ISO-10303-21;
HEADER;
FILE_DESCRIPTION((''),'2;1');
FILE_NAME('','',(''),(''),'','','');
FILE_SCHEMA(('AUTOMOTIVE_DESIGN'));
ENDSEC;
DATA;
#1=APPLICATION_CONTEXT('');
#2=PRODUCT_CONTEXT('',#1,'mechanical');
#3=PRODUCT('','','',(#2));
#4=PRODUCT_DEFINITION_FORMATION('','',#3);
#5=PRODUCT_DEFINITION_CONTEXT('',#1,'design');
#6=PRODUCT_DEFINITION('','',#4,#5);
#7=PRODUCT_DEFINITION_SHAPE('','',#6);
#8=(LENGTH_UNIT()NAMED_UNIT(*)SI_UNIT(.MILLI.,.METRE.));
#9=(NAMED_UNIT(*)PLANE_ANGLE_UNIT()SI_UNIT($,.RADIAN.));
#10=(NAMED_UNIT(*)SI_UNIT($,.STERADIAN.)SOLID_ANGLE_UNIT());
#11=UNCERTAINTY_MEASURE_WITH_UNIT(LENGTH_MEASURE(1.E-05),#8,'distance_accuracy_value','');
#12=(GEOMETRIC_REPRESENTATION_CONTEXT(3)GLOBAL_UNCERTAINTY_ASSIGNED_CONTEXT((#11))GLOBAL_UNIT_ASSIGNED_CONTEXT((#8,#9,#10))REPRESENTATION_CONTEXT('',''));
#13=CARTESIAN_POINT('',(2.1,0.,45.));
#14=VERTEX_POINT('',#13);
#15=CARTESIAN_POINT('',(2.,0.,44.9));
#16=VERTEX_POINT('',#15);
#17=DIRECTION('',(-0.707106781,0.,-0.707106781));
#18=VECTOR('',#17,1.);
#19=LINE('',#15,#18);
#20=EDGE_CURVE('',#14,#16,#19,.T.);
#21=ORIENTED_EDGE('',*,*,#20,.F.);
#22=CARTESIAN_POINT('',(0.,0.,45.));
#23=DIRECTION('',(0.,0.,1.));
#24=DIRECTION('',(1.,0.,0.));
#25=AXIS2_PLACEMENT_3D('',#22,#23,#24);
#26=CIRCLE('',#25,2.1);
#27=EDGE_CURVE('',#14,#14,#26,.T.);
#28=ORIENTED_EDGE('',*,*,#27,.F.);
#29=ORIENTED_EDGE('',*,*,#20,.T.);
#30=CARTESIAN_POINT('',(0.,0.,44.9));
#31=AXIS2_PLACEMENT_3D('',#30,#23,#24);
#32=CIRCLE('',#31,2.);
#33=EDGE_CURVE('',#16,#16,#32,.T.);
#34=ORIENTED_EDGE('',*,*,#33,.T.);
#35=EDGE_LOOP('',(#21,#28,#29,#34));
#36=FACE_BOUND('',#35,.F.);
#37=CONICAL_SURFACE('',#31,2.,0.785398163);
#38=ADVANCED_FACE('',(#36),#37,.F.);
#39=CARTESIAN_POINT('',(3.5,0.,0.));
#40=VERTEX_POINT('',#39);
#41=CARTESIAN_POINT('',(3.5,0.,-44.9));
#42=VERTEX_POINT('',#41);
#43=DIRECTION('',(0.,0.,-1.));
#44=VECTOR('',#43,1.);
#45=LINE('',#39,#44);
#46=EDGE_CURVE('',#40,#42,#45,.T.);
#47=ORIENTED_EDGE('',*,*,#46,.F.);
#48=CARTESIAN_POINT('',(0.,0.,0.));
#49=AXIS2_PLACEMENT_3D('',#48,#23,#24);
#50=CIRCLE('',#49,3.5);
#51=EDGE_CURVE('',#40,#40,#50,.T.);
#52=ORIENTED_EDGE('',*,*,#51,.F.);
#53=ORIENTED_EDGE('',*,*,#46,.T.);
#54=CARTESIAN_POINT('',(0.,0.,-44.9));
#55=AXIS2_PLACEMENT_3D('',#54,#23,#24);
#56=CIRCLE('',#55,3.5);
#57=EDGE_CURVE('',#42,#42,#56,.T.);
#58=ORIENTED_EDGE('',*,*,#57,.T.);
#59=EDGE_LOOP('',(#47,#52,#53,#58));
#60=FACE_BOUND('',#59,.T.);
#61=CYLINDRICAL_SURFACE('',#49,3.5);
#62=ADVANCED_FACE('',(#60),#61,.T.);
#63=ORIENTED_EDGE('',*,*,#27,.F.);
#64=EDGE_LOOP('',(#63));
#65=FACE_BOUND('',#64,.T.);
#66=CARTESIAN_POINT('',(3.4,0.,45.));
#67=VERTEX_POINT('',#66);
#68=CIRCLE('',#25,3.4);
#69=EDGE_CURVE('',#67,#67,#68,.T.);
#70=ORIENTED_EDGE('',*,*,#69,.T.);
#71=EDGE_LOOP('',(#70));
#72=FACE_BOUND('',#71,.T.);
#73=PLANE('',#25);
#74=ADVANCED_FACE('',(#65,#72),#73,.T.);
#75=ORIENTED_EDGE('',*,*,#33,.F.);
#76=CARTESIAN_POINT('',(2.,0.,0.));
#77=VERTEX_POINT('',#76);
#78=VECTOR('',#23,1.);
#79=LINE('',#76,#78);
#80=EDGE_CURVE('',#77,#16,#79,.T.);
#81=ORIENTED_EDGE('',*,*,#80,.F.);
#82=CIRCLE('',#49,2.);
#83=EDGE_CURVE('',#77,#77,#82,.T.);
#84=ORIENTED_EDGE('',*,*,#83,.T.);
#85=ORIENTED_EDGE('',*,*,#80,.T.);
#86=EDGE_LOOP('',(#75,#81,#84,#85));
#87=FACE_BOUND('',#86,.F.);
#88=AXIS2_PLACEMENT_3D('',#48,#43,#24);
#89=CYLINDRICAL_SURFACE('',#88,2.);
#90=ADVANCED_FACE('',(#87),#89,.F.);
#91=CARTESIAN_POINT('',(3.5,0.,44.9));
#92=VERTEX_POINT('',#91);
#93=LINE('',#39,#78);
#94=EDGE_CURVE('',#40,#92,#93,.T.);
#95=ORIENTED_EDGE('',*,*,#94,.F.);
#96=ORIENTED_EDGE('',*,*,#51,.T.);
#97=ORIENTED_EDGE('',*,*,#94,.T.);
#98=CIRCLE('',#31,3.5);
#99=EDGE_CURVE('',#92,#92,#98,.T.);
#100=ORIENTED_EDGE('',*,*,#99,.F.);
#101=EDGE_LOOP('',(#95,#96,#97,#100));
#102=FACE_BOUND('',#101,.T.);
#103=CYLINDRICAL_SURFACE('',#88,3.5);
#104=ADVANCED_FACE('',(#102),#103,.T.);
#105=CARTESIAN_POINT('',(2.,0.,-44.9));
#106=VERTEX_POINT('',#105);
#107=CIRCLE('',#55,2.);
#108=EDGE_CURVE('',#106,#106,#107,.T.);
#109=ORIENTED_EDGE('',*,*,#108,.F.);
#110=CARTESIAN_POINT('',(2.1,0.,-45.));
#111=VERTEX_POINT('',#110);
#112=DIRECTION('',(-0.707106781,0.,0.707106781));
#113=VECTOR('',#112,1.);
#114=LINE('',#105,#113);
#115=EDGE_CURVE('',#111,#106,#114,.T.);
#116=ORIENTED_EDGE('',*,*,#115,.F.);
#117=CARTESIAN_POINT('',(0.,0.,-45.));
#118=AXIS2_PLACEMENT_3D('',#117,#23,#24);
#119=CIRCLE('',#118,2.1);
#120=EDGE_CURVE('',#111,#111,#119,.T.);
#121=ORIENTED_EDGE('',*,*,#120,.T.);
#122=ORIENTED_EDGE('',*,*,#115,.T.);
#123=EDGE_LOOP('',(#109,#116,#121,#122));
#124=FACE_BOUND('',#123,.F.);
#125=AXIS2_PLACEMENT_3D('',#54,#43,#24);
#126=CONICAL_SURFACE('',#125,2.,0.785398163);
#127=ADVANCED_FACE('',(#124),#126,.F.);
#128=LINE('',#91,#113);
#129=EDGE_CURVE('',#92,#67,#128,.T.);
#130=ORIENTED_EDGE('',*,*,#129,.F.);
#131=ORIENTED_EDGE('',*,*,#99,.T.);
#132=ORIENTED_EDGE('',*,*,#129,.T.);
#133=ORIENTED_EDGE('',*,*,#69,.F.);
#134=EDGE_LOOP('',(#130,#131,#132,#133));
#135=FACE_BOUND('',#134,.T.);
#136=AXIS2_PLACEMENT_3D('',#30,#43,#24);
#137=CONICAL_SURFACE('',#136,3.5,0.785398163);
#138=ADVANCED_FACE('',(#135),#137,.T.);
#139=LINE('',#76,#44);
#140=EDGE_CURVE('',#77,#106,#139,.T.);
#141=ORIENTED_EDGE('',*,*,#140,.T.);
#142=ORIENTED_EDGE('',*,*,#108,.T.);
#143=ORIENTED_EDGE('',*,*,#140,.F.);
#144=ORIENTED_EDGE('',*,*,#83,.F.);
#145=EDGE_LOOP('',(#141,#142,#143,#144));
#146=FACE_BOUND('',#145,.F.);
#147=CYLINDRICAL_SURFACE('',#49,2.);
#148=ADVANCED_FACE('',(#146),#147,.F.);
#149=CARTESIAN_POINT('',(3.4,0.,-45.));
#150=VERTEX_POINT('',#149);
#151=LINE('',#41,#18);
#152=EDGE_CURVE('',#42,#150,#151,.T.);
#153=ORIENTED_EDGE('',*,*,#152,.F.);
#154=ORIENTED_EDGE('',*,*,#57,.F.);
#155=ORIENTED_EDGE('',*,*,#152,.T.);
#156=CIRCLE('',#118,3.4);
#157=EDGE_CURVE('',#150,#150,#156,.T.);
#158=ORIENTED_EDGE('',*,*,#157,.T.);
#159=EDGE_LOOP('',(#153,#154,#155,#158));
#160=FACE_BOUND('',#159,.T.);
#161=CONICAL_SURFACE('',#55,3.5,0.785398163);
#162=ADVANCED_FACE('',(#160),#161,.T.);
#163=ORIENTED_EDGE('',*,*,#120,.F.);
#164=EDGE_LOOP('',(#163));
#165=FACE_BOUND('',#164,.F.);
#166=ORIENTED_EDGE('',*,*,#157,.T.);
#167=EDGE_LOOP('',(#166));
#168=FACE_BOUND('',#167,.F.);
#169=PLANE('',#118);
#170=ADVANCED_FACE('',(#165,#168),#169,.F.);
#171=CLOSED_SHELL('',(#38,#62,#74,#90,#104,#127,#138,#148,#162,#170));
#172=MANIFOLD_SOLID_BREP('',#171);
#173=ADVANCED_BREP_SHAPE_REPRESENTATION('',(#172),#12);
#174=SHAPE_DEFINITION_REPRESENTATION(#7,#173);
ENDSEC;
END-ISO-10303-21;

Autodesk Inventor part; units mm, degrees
ref_plane "YZ Plane" through (0, 0, 0) normal (1, 0, 0) x (0, 1, 0)
ref_plane "XZ Plane" through (0, 0, 0) normal (0, 1, 0) x (-1, 0, 0)
ref_plane "XY Plane" through (0, 0, 0) normal (0, 0, 1) x (1, 0, 0)
sketch "Sketch1" plane through (0, 0, 0) normal (0, 0, 1) x (1, 0, 0)
  circle A0 centre (0, 0) radius 3.5
  circle A1 centre (0, 0) radius 2
  dimension "d0" = 7
  dimension "d1" = 4
extrude "Extrusion1" add sketch "Sketch1" along normal mid plane 90
thread "Thread1" size "M4x0.7" class "6H" standard "ANSI Metric M Profile" length 10
thread "Thread2" size "M4x0.7" class "6H" standard "ANSI Metric M Profile" length 10
chamfer "Chamfer1" distance 0.1 angle 45 4 edges at (-3.5, 0, 45) (-2, 0, 45) (-2, 0, -45) (-3.5, 0, -45)
properties part number "M4 85mm Standoff" material "Aluminum 6061"
